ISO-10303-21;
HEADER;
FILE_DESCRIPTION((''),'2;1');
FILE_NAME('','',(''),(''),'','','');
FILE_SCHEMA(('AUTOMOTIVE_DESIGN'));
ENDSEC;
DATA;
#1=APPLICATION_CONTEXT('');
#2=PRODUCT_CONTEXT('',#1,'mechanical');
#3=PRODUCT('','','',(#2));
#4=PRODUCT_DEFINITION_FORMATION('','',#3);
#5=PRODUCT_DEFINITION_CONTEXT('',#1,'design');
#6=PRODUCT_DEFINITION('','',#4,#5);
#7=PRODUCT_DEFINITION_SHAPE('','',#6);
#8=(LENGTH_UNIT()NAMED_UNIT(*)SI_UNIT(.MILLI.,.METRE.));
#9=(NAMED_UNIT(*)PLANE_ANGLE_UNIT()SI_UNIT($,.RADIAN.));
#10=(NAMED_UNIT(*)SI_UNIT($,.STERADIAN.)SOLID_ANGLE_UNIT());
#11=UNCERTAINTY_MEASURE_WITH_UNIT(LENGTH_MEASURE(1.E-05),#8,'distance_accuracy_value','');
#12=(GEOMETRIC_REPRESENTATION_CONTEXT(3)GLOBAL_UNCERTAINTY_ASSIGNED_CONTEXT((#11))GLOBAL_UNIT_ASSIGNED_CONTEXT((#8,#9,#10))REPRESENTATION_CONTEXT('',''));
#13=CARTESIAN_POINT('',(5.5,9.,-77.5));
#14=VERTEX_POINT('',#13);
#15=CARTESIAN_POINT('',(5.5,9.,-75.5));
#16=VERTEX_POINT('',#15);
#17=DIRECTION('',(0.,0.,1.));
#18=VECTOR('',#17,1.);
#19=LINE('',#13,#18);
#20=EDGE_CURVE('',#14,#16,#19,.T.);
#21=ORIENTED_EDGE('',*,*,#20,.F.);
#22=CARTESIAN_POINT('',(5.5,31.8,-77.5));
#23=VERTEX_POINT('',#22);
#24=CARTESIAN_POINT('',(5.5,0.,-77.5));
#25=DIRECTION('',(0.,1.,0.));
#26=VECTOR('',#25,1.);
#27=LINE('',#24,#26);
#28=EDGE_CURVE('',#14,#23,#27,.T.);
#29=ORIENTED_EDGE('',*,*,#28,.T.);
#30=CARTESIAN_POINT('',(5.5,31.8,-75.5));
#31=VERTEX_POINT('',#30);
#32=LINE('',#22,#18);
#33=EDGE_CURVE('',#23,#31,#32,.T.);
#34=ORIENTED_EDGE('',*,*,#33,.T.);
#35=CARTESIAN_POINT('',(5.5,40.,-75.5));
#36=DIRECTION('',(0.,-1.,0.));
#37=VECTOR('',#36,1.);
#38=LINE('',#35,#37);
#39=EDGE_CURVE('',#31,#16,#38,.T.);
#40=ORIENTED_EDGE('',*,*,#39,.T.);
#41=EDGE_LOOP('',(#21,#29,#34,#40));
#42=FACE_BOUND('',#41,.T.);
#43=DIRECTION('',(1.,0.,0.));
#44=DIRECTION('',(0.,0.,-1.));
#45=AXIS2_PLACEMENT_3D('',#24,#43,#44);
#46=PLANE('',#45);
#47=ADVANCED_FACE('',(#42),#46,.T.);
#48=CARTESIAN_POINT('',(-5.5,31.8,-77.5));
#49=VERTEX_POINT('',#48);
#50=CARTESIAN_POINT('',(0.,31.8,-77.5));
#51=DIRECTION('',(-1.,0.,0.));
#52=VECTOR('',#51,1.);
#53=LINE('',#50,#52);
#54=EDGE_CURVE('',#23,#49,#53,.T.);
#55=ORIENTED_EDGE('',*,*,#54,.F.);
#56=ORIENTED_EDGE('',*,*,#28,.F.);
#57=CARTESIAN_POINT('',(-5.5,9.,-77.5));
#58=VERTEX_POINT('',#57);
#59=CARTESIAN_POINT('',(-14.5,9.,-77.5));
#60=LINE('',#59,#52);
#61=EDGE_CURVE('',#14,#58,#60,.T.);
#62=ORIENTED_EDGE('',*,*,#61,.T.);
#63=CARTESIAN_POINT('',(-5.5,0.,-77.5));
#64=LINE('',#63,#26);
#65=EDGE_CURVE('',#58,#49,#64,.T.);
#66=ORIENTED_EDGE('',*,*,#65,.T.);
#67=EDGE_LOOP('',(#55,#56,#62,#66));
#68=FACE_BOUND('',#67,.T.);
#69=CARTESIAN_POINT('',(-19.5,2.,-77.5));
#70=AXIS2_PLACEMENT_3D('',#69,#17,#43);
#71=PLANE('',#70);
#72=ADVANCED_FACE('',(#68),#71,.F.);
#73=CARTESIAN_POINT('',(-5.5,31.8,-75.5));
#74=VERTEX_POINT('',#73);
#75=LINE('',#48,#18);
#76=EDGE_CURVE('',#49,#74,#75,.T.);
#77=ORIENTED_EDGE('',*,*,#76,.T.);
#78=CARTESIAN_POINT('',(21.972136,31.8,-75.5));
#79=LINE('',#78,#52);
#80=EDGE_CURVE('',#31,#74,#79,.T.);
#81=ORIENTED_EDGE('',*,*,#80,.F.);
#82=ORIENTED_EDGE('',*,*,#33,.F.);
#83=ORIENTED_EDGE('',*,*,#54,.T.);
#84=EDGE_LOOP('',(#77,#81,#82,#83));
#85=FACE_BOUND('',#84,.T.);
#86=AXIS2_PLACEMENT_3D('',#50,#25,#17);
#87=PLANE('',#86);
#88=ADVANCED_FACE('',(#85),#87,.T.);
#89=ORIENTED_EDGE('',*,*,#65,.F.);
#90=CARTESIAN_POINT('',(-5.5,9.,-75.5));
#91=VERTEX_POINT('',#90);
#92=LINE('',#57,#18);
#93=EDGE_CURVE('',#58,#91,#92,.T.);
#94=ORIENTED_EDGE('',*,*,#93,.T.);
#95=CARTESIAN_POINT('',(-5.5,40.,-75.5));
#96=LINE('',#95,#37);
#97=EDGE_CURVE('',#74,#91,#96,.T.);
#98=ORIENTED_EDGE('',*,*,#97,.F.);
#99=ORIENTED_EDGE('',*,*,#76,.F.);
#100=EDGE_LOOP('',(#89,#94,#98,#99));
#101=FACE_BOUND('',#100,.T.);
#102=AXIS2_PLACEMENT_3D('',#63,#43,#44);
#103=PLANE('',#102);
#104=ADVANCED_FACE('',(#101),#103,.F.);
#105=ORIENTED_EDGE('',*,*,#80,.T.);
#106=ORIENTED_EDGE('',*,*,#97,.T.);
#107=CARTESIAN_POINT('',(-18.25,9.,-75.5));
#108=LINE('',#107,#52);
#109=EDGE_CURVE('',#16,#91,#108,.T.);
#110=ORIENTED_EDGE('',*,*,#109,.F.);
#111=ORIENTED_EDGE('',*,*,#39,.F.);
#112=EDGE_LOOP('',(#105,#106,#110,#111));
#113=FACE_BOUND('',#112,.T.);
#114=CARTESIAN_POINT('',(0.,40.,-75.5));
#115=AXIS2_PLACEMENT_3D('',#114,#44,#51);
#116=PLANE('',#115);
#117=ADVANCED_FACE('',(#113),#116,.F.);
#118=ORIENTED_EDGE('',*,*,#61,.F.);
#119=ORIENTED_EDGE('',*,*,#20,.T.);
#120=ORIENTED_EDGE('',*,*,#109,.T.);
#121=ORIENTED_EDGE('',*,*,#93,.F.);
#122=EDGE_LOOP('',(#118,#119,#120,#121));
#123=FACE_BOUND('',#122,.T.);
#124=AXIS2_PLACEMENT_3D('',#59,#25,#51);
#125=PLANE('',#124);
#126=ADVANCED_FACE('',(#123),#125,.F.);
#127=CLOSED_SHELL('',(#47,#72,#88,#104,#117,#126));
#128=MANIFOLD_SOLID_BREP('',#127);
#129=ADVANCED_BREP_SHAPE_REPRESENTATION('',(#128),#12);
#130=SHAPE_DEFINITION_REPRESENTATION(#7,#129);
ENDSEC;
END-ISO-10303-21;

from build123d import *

# Parameters (mm, degrees)
SKETCH1_W                       = 39
SKETCH1_H                       = 155
BOSS_EXTRUDE1_DEPTH             = 2
BOSS_EXTRUDE2_DEPTH             = 38
SKETCH3_W                       = 2
SKETCH3_H                       = 2
BOSS_EXTRUDE3_DEPTH             = 38
SKETCH4_W                       = 2
SKETCH4_H                       = 2
BOSS_EXTRUDE4_DEPTH             = 151
SKETCH6_W                       = 35
SKETCH6_H                       = 2.2
CUT_EXTRUDE1_DEPTH              = 160.340045186
SKETCH7_W                       = 35
SKETCH7_H                       = 2.2
CUT_EXTRUDE2_DEPTH              = 89.490112442
SKETCH5_W                       = 31
SKETCH5_H                       = 2
BOSS_EXTRUDE5_DEPTH             = 2
BOSS_EXTRUDE6_REACH             = 91.367
SKETCH8_W                       = 2
SKETCH8_H                       = 2
BOSS_EXTRUDE6_DIRECTION_2_REACH = 91.367
SKETCH10_W                      = 2
SKETCH10_H                      = 2.2
SKETCH10_W_2                    = 2.2
SKETCH10_H_2                    = 2
BOSS_EXTRUDE8_DEPTH             = 2
SKETCH11_W                      = 2
SKETCH11_H                      = 2.2
SKETCH11_W_2                    = 2.2
SKETCH11_H_2                    = 2
BOSS_EXTRUDE9_DEPTH             = 2
FILLET2_R                       = 2.5
SKETCH14_W                      = 36.5
SKETCH14_H                      = 7.75
BOSS_EXTRUDE10_DEPTH            = 2
SKETCH13_W                      = 31
SKETCH13_H                      = 3
CUT_EXTRUDE4_DEPTH              = 2
FILLET3_R                       = 2
FILLET4_R                       = 0.5
SKETCH15_R                      = 5.1
CUT_EXTRUDE5_DEPTH              = 90.367219941
SKETCH16_R                      = 7.1
BOSS_EXTRUDE11_DEPTH            = 1
FILLET5_R                       = 0.5
FILLET7_R                       = 0.5
CUT_EXTRUDE6_DEPTH              = 6
SKETCH18_W                      = 29
SKETCH18_H                      = 3
CUT_EXTRUDE8_DEPTH              = 90.367219986
CUT_EXTRUDE11_DEPTH             = 90.367219986
CUT_EXTRUDE11_DEPTH_BACK        = 90.367219986
SKETCH20_W                      = 5
SKETCH20_H                      = 40
SKETCH21_W                      = 9
SKETCH21_H                      = 31
CUT_EXTRUDE12_DEPTH             = 89.41097217
CUT_EXTRUDE13_DEPTH             = 41.425858061
CUT_EXTRUDE13_DEPTH_BACK        = 41.425858061
SKETCH22_W                      = 11
SKETCH22_H                      = 8.2


with BuildPart() as part:
    # Sketch1 → Boss-Extrude1 (new body)
    with BuildSketch(Plane(origin=(0, 0, 0), x_dir=(1, 0, 0), z_dir=(0, 1, 0))):
        Rectangle(SKETCH1_W, SKETCH1_H)
    extrude(amount=BOSS_EXTRUDE1_DEPTH)

    # Sketch2 → Boss-Extrude2 (add)
    with BuildSketch(Plane(origin=(0, 2, 0), x_dir=(1, 0, 0), z_dir=(0, 1, 0))):
        Polygon((-17.5, -77.5), (-17.5, -75.5), (-17.5, 75.5), (17.5, 75.5), (17.5, -75.5), (17.5, -77.5), (19.5, -77.5), (19.5, 77.5), (-19.5, 77.5), (-19.5, -77.5), align=None)
    extrude(amount=BOSS_EXTRUDE2_DEPTH)

    # Sketch3 → Boss-Extrude3 (add)
    with BuildSketch(Plane(origin=(0, 2, 0), x_dir=(1, 0, 0), z_dir=(0, 1, 0))):
        with Locations((-16.5, -76.5)):
            Rectangle(SKETCH3_W, SKETCH3_H)
        with Locations((-16.5, -72.3)):
            Rectangle(SKETCH3_W, SKETCH3_H)
        with Locations((16.5, -76.5)):
            Rectangle(SKETCH3_W, SKETCH3_H)
        with Locations((16.5, -72.3)):
            Rectangle(SKETCH3_W, SKETCH3_H)
    extrude(amount=BOSS_EXTRUDE3_DEPTH)

    # Sketch4 → Boss-Extrude4 (add)
    with BuildSketch(Plane.XY.offset(-75.5)):
        with Locations((-16.5, 39)):
            Rectangle(SKETCH4_W, SKETCH4_H)
        Polygon((-15.5, 33.8), (-17.5, 31.8), (-17.5, 35.8), (-15.5, 35.8), align=None)
        Polygon((15.5, 35.8), (17.5, 35.8), (17.5, 31.8), (15.5, 33.8), align=None)
        with Locations((16.5, 39)):
            Rectangle(SKETCH4_W, SKETCH4_H)
    extrude(amount=BOSS_EXTRUDE4_DEPTH)

    # Sketch6 → Cut-Extrude1 (cut, through all)
    with BuildSketch(Plane.XY.offset(-75.5)):
        with Locations((0, 36.9)):
            Rectangle(SKETCH6_W, SKETCH6_H)
    extrude(amount=CUT_EXTRUDE1_DEPTH, mode=Mode.SUBTRACT)

    # Sketch7 → Cut-Extrude2 (cut, through all)
    with BuildSketch(Plane(origin=(0, 2, 0), x_dir=(1, 0, 0), z_dir=(0, 1, 0))):
        with Locations((0, -74.4)):
            Rectangle(SKETCH7_W, SKETCH7_H)
    extrude(amount=CUT_EXTRUDE2_DEPTH, mode=Mode.SUBTRACT)

    # Sketch5 → Boss-Extrude5 (add)
    with BuildSketch(Plane(origin=(0, 2, 0), x_dir=(1, 0, 0), z_dir=(0, 1, 0))):
        with Locations((0, -76.5)):
            Rectangle(SKETCH5_W, SKETCH5_H)
        with Locations((0, -72.3)):
            Rectangle(SKETCH5_W, SKETCH5_H)
    extrude(amount=BOSS_EXTRUDE5_DEPTH)

    # Boss-Extrude6: up to this face of the body (flat: up to its plane)
    boss_extrude6_end = Plane(part.part.faces().sort_by_distance((17.5, 16.9, -2.1))[0])
    # Sketch8 → Boss-Extrude6 (add, up to the picked face)
    with BuildSketch(Plane(origin=(0, 0, 0), x_dir=(0, 0, -1), z_dir=(1, 0, 0)), mode=Mode.PRIVATE) as boss_extrude6_sk1:
        with Locations((74.5, 39)):
            Rectangle(SKETCH8_W, SKETCH8_H)
    boss_extrude6_tool1 = split(extrude(boss_extrude6_sk1.sketch, amount=BOSS_EXTRUDE6_REACH, mode=Mode.PRIVATE), bisect_by=boss_extrude6_end, keep=Keep.BOTH, mode=Mode.PRIVATE)
    # Sketch8 → Boss-Extrude6 (add, up to the picked face)
    with BuildSketch(Plane(origin=(0, 0, 0), x_dir=(0, 0, -1), z_dir=(1, 0, 0)), mode=Mode.PRIVATE) as boss_extrude6_sk2:
        Polygon((75.5, 35.8), (73.5, 35.8), (73.5, 33.8), (75.5, 31.8), align=None)
    boss_extrude6_tool2 = split(extrude(boss_extrude6_sk2.sketch, amount=BOSS_EXTRUDE6_REACH, mode=Mode.PRIVATE), bisect_by=boss_extrude6_end, keep=Keep.BOTH, mode=Mode.PRIVATE)
    add(boss_extrude6_tool1.solids().sort_by(Axis((0, 39, -74.5), (1, 0, 0)))[0])
    add(boss_extrude6_tool2.solids().sort_by(Axis((0, 34.244444, -74.611111), (1, 0, 0)))[0])

    # Boss-Extrude6 direction 2: up to this face of the body (flat: up to its plane)
    boss_extrude6_direction_2_end = Plane(part.part.faces().sort_by_distance((-17.5, 16.9, -2.1))[0])
    # Sketch8 → Boss-Extrude6 direction 2 (add, up to the picked face)
    with BuildSketch(Plane(origin=(0, 0, 0), x_dir=(0, 0, -1), z_dir=(1, 0, 0)), mode=Mode.PRIVATE) as boss_extrude6_direction_2_sk1:
        with Locations((74.5, 39)):
            Rectangle(SKETCH8_W, SKETCH8_H)
    boss_extrude6_direction_2_tool1 = split(extrude(boss_extrude6_direction_2_sk1.sketch, amount=-BOSS_EXTRUDE6_DIRECTION_2_REACH, mode=Mode.PRIVATE), bisect_by=boss_extrude6_direction_2_end, keep=Keep.BOTH, mode=Mode.PRIVATE)
    # Sketch8 → Boss-Extrude6 direction 2 (add, up to the picked face)
    with BuildSketch(Plane(origin=(0, 0, 0), x_dir=(0, 0, -1), z_dir=(1, 0, 0)), mode=Mode.PRIVATE) as boss_extrude6_direction_2_sk2:
        Polygon((75.5, 35.8), (73.5, 35.8), (73.5, 33.8), (75.5, 31.8), align=None)
    boss_extrude6_direction_2_tool2 = split(extrude(boss_extrude6_direction_2_sk2.sketch, amount=-BOSS_EXTRUDE6_DIRECTION_2_REACH, mode=Mode.PRIVATE), bisect_by=boss_extrude6_direction_2_end, keep=Keep.BOTH, mode=Mode.PRIVATE)
    add(boss_extrude6_direction_2_tool1.solids().sort_by(Axis((0, 39, -74.5), (-1, 0, 0)))[0])
    add(boss_extrude6_direction_2_tool2.solids().sort_by(Axis((0, 34.244444, -74.611111), (-1, 0, 0)))[0])

    # Sketch10 → Boss-Extrude8 (add)
    with BuildSketch(Plane(origin=(-17.5, 0, 0), x_dir=(0, 0, -1), z_dir=(1, 0, 0))):
        with Locations((-76.5, 36.9)):
            Rectangle(SKETCH10_W, SKETCH10_H)
        with Locations((-74.4, 39)):
            Rectangle(SKETCH10_W_2, SKETCH10_H_2)
    extrude(amount=BOSS_EXTRUDE8_DEPTH)

    # Sketch11 → Boss-Extrude9 (add)
    with BuildSketch(Plane.ZY.offset(-17.5)):
        with Locations((76.5, 36.9)):
            Rectangle(SKETCH11_W, SKETCH11_H)
        with Locations((74.4, 39)):
            Rectangle(SKETCH11_W_2, SKETCH11_H_2)
    extrude(amount=BOSS_EXTRUDE9_DEPTH)

    # Fillet2
    fillet2_edges = [part.edges().sort_by_distance(p)[0] for p in [
        (-17.5, 16.9, 71.3),
        (17.5, 16.9, 71.3),
        (19.5, 20, 77.5),
        (-19.5, 20, 77.5),
        (-19.5, 20, -77.5),
        (-17.5, 16.9, -75.5),
        (17.5, 16.9, -75.5),
        (19.5, 20, -77.5),
        (19.5, 40, 0),
        (-19.5, 40, 0),
        (19.5, 0, 0),
        (-19.5, 0, 0),
        (0, 40, -77.5),
        (0, 0, 77.5),
        (0, 0, -77.5),
        (-17.5, 40, 77.5),
        (17.5, 40, 77.5),
    ]]
    fillet(fillet2_edges, radius=FILLET2_R)

    # Sketch14 → Boss-Extrude10 (add)
    with BuildSketch(Plane.XY.offset(-75.5)):
        with Locations((0, 5.125)):
            Rectangle(SKETCH14_W, SKETCH14_H)
    extrude(amount=BOSS_EXTRUDE10_DEPTH)

    # Sketch13 → Cut-Extrude4 (cut)
    with BuildSketch(Plane(origin=(0, 0, -77.5), x_dir=(-1, 0, 0), z_dir=(0, 0, -1))):
        with Locations((0, 5.5)):
            Rectangle(SKETCH13_W, SKETCH13_H)
    extrude(amount=-CUT_EXTRUDE4_DEPTH, mode=Mode.SUBTRACT)

    # Fillet3
    fillet3_edges = [part.edges().sort_by_distance(p)[0] for p in [
        (0, 9, -73.5),
    ]]
    fillet(fillet3_edges, radius=FILLET3_R - 0.0001)  # a hair under: the kernel refuses the full size

    # Fillet4
    fillet4_edges = [part.edges().sort_by_distance(p)[0] for p in [
        (15.5, 5.5, -75.5),
        (15.5, 4, -76.5),
        (0, 7, -75.5),
        (15.5, 7, -76.5),
        (-15.5, 5.5, -75.5),
        (-15.5, 7, -76.5),
        (0, 4, -75.5),
        (-15.5, 4, -76.5),
        (15.5, 5.5, -77.5),
        (0, 4, -77.5),
        (-15.5, 5.5, -77.5),
        (0, 7, -77.5),
    ]]
    fillet(fillet4_edges, radius=FILLET4_R)

    # Sketch15 → Cut-Extrude5 (cut, through all)
    with BuildSketch(Plane.XZ):
        with Locations(Location((0, 38.75, 0), (0, 0, 270))):
            Circle(SKETCH15_R)
        with Locations(Location((0, -38.75, 0), (0, 0, 270))):
            Circle(SKETCH15_R)
    extrude(amount=-CUT_EXTRUDE5_DEPTH, mode=Mode.SUBTRACT)

    # Sketch16 → Boss-Extrude11 (add)
    with BuildSketch(Plane(origin=(0, 2, 0), x_dir=(1, 0, 0), z_dir=(0, 1, 0))):
        with Locations(Location((0, 38.75, 0), (0, 0, 270))):
            Circle(SKETCH16_R)
        with Locations(Location((0, -38.75, 0), (0, 0, 270))):
            Circle(SKETCH16_R)
    extrude(amount=BOSS_EXTRUDE11_DEPTH)

    # Fillet5
    fillet5_edges = [part.edges().sort_by_distance(p)[0] for p in [
        (0, 2, -45.85),
        (0, 3, -45.85),
        (0, 2, 31.65),
        (0, 3, 31.65),
    ]]
    fillet(fillet5_edges, radius=FILLET5_R - 0.0001)  # a hair under: the kernel refuses the full size

    # Fillet7
    fillet7_edges = [part.edges().sort_by_distance(p)[0] for p in [
        (15.5, 40, 0.75),
        (0, 4, 77.5),
        (0, 40, -73.5),
        (-15.5, 40, 0.75),
        (-15.5, 20.75, 77.5),
        (-15.5, 39.267766953, 76.767766953),
        (15.5, 20.75, 77.5),
        (15.5, 39.267766953, 76.767766953),
    ]]
    fillet(fillet7_edges, radius=FILLET7_R)

    # Sketch17 → Cut-Extrude6 (cut)
    with BuildSketch(Plane.XZ):
        Polygon((-17, -77.5), (-17, 70.299999999), (-14.999999999, 71.3), (-14.999999999, 77.5), (14.999999999, 77.5), (14.999999999, 71.3), (17, 70.299999999), (17, -77.5), align=None)
    extrude(amount=-CUT_EXTRUDE6_DEPTH, mode=Mode.SUBTRACT)

    # Sketch18 → Cut-Extrude8 (cut, through all)
    with BuildSketch(Plane.XY):
        with Locations((0, 7.5)):
            Rectangle(SKETCH18_W, SKETCH18_H)
    extrude(amount=-CUT_EXTRUDE8_DEPTH, mode=Mode.SUBTRACT)

    # Sketch20 → Cut-Extrude11 (cut, two sides: drawn at the far end of the back side and taken through both)
    with BuildSketch(Plane.XY.offset(-CUT_EXTRUDE11_DEPTH_BACK)):
        Polygon((19.5, 40), (14.5, 40), (14.5, 6), (14.5, 0), (19.5, 0), align=None)
        with Locations((-17, 20)):
            Rectangle(SKETCH20_W, SKETCH20_H)
    extrude(amount=CUT_EXTRUDE11_DEPTH + CUT_EXTRUDE11_DEPTH_BACK, mode=Mode.SUBTRACT)

    # Sketch21 → Cut-Extrude12 (cut, through all)
    with BuildSketch(Plane.XY):
        with Locations((-10, 24.5)):
            Rectangle(SKETCH21_W, SKETCH21_H)
        with Locations((10, 24.5)):
            Rectangle(SKETCH21_W, SKETCH21_H)
    extrude(amount=-CUT_EXTRUDE12_DEPTH, mode=Mode.SUBTRACT)

    # Sketch22 → Cut-Extrude13 (cut, two sides: drawn at the far end of the back side and taken through both)
    with BuildSketch(Plane.XY.offset(-75.5).offset(-CUT_EXTRUDE13_DEPTH_BACK)):
        with Locations((0, 35.9)):
            Rectangle(SKETCH22_W, SKETCH22_H)
    extrude(amount=CUT_EXTRUDE13_DEPTH + CUT_EXTRUDE13_DEPTH_BACK, mode=Mode.SUBTRACT)


solid = part.part
